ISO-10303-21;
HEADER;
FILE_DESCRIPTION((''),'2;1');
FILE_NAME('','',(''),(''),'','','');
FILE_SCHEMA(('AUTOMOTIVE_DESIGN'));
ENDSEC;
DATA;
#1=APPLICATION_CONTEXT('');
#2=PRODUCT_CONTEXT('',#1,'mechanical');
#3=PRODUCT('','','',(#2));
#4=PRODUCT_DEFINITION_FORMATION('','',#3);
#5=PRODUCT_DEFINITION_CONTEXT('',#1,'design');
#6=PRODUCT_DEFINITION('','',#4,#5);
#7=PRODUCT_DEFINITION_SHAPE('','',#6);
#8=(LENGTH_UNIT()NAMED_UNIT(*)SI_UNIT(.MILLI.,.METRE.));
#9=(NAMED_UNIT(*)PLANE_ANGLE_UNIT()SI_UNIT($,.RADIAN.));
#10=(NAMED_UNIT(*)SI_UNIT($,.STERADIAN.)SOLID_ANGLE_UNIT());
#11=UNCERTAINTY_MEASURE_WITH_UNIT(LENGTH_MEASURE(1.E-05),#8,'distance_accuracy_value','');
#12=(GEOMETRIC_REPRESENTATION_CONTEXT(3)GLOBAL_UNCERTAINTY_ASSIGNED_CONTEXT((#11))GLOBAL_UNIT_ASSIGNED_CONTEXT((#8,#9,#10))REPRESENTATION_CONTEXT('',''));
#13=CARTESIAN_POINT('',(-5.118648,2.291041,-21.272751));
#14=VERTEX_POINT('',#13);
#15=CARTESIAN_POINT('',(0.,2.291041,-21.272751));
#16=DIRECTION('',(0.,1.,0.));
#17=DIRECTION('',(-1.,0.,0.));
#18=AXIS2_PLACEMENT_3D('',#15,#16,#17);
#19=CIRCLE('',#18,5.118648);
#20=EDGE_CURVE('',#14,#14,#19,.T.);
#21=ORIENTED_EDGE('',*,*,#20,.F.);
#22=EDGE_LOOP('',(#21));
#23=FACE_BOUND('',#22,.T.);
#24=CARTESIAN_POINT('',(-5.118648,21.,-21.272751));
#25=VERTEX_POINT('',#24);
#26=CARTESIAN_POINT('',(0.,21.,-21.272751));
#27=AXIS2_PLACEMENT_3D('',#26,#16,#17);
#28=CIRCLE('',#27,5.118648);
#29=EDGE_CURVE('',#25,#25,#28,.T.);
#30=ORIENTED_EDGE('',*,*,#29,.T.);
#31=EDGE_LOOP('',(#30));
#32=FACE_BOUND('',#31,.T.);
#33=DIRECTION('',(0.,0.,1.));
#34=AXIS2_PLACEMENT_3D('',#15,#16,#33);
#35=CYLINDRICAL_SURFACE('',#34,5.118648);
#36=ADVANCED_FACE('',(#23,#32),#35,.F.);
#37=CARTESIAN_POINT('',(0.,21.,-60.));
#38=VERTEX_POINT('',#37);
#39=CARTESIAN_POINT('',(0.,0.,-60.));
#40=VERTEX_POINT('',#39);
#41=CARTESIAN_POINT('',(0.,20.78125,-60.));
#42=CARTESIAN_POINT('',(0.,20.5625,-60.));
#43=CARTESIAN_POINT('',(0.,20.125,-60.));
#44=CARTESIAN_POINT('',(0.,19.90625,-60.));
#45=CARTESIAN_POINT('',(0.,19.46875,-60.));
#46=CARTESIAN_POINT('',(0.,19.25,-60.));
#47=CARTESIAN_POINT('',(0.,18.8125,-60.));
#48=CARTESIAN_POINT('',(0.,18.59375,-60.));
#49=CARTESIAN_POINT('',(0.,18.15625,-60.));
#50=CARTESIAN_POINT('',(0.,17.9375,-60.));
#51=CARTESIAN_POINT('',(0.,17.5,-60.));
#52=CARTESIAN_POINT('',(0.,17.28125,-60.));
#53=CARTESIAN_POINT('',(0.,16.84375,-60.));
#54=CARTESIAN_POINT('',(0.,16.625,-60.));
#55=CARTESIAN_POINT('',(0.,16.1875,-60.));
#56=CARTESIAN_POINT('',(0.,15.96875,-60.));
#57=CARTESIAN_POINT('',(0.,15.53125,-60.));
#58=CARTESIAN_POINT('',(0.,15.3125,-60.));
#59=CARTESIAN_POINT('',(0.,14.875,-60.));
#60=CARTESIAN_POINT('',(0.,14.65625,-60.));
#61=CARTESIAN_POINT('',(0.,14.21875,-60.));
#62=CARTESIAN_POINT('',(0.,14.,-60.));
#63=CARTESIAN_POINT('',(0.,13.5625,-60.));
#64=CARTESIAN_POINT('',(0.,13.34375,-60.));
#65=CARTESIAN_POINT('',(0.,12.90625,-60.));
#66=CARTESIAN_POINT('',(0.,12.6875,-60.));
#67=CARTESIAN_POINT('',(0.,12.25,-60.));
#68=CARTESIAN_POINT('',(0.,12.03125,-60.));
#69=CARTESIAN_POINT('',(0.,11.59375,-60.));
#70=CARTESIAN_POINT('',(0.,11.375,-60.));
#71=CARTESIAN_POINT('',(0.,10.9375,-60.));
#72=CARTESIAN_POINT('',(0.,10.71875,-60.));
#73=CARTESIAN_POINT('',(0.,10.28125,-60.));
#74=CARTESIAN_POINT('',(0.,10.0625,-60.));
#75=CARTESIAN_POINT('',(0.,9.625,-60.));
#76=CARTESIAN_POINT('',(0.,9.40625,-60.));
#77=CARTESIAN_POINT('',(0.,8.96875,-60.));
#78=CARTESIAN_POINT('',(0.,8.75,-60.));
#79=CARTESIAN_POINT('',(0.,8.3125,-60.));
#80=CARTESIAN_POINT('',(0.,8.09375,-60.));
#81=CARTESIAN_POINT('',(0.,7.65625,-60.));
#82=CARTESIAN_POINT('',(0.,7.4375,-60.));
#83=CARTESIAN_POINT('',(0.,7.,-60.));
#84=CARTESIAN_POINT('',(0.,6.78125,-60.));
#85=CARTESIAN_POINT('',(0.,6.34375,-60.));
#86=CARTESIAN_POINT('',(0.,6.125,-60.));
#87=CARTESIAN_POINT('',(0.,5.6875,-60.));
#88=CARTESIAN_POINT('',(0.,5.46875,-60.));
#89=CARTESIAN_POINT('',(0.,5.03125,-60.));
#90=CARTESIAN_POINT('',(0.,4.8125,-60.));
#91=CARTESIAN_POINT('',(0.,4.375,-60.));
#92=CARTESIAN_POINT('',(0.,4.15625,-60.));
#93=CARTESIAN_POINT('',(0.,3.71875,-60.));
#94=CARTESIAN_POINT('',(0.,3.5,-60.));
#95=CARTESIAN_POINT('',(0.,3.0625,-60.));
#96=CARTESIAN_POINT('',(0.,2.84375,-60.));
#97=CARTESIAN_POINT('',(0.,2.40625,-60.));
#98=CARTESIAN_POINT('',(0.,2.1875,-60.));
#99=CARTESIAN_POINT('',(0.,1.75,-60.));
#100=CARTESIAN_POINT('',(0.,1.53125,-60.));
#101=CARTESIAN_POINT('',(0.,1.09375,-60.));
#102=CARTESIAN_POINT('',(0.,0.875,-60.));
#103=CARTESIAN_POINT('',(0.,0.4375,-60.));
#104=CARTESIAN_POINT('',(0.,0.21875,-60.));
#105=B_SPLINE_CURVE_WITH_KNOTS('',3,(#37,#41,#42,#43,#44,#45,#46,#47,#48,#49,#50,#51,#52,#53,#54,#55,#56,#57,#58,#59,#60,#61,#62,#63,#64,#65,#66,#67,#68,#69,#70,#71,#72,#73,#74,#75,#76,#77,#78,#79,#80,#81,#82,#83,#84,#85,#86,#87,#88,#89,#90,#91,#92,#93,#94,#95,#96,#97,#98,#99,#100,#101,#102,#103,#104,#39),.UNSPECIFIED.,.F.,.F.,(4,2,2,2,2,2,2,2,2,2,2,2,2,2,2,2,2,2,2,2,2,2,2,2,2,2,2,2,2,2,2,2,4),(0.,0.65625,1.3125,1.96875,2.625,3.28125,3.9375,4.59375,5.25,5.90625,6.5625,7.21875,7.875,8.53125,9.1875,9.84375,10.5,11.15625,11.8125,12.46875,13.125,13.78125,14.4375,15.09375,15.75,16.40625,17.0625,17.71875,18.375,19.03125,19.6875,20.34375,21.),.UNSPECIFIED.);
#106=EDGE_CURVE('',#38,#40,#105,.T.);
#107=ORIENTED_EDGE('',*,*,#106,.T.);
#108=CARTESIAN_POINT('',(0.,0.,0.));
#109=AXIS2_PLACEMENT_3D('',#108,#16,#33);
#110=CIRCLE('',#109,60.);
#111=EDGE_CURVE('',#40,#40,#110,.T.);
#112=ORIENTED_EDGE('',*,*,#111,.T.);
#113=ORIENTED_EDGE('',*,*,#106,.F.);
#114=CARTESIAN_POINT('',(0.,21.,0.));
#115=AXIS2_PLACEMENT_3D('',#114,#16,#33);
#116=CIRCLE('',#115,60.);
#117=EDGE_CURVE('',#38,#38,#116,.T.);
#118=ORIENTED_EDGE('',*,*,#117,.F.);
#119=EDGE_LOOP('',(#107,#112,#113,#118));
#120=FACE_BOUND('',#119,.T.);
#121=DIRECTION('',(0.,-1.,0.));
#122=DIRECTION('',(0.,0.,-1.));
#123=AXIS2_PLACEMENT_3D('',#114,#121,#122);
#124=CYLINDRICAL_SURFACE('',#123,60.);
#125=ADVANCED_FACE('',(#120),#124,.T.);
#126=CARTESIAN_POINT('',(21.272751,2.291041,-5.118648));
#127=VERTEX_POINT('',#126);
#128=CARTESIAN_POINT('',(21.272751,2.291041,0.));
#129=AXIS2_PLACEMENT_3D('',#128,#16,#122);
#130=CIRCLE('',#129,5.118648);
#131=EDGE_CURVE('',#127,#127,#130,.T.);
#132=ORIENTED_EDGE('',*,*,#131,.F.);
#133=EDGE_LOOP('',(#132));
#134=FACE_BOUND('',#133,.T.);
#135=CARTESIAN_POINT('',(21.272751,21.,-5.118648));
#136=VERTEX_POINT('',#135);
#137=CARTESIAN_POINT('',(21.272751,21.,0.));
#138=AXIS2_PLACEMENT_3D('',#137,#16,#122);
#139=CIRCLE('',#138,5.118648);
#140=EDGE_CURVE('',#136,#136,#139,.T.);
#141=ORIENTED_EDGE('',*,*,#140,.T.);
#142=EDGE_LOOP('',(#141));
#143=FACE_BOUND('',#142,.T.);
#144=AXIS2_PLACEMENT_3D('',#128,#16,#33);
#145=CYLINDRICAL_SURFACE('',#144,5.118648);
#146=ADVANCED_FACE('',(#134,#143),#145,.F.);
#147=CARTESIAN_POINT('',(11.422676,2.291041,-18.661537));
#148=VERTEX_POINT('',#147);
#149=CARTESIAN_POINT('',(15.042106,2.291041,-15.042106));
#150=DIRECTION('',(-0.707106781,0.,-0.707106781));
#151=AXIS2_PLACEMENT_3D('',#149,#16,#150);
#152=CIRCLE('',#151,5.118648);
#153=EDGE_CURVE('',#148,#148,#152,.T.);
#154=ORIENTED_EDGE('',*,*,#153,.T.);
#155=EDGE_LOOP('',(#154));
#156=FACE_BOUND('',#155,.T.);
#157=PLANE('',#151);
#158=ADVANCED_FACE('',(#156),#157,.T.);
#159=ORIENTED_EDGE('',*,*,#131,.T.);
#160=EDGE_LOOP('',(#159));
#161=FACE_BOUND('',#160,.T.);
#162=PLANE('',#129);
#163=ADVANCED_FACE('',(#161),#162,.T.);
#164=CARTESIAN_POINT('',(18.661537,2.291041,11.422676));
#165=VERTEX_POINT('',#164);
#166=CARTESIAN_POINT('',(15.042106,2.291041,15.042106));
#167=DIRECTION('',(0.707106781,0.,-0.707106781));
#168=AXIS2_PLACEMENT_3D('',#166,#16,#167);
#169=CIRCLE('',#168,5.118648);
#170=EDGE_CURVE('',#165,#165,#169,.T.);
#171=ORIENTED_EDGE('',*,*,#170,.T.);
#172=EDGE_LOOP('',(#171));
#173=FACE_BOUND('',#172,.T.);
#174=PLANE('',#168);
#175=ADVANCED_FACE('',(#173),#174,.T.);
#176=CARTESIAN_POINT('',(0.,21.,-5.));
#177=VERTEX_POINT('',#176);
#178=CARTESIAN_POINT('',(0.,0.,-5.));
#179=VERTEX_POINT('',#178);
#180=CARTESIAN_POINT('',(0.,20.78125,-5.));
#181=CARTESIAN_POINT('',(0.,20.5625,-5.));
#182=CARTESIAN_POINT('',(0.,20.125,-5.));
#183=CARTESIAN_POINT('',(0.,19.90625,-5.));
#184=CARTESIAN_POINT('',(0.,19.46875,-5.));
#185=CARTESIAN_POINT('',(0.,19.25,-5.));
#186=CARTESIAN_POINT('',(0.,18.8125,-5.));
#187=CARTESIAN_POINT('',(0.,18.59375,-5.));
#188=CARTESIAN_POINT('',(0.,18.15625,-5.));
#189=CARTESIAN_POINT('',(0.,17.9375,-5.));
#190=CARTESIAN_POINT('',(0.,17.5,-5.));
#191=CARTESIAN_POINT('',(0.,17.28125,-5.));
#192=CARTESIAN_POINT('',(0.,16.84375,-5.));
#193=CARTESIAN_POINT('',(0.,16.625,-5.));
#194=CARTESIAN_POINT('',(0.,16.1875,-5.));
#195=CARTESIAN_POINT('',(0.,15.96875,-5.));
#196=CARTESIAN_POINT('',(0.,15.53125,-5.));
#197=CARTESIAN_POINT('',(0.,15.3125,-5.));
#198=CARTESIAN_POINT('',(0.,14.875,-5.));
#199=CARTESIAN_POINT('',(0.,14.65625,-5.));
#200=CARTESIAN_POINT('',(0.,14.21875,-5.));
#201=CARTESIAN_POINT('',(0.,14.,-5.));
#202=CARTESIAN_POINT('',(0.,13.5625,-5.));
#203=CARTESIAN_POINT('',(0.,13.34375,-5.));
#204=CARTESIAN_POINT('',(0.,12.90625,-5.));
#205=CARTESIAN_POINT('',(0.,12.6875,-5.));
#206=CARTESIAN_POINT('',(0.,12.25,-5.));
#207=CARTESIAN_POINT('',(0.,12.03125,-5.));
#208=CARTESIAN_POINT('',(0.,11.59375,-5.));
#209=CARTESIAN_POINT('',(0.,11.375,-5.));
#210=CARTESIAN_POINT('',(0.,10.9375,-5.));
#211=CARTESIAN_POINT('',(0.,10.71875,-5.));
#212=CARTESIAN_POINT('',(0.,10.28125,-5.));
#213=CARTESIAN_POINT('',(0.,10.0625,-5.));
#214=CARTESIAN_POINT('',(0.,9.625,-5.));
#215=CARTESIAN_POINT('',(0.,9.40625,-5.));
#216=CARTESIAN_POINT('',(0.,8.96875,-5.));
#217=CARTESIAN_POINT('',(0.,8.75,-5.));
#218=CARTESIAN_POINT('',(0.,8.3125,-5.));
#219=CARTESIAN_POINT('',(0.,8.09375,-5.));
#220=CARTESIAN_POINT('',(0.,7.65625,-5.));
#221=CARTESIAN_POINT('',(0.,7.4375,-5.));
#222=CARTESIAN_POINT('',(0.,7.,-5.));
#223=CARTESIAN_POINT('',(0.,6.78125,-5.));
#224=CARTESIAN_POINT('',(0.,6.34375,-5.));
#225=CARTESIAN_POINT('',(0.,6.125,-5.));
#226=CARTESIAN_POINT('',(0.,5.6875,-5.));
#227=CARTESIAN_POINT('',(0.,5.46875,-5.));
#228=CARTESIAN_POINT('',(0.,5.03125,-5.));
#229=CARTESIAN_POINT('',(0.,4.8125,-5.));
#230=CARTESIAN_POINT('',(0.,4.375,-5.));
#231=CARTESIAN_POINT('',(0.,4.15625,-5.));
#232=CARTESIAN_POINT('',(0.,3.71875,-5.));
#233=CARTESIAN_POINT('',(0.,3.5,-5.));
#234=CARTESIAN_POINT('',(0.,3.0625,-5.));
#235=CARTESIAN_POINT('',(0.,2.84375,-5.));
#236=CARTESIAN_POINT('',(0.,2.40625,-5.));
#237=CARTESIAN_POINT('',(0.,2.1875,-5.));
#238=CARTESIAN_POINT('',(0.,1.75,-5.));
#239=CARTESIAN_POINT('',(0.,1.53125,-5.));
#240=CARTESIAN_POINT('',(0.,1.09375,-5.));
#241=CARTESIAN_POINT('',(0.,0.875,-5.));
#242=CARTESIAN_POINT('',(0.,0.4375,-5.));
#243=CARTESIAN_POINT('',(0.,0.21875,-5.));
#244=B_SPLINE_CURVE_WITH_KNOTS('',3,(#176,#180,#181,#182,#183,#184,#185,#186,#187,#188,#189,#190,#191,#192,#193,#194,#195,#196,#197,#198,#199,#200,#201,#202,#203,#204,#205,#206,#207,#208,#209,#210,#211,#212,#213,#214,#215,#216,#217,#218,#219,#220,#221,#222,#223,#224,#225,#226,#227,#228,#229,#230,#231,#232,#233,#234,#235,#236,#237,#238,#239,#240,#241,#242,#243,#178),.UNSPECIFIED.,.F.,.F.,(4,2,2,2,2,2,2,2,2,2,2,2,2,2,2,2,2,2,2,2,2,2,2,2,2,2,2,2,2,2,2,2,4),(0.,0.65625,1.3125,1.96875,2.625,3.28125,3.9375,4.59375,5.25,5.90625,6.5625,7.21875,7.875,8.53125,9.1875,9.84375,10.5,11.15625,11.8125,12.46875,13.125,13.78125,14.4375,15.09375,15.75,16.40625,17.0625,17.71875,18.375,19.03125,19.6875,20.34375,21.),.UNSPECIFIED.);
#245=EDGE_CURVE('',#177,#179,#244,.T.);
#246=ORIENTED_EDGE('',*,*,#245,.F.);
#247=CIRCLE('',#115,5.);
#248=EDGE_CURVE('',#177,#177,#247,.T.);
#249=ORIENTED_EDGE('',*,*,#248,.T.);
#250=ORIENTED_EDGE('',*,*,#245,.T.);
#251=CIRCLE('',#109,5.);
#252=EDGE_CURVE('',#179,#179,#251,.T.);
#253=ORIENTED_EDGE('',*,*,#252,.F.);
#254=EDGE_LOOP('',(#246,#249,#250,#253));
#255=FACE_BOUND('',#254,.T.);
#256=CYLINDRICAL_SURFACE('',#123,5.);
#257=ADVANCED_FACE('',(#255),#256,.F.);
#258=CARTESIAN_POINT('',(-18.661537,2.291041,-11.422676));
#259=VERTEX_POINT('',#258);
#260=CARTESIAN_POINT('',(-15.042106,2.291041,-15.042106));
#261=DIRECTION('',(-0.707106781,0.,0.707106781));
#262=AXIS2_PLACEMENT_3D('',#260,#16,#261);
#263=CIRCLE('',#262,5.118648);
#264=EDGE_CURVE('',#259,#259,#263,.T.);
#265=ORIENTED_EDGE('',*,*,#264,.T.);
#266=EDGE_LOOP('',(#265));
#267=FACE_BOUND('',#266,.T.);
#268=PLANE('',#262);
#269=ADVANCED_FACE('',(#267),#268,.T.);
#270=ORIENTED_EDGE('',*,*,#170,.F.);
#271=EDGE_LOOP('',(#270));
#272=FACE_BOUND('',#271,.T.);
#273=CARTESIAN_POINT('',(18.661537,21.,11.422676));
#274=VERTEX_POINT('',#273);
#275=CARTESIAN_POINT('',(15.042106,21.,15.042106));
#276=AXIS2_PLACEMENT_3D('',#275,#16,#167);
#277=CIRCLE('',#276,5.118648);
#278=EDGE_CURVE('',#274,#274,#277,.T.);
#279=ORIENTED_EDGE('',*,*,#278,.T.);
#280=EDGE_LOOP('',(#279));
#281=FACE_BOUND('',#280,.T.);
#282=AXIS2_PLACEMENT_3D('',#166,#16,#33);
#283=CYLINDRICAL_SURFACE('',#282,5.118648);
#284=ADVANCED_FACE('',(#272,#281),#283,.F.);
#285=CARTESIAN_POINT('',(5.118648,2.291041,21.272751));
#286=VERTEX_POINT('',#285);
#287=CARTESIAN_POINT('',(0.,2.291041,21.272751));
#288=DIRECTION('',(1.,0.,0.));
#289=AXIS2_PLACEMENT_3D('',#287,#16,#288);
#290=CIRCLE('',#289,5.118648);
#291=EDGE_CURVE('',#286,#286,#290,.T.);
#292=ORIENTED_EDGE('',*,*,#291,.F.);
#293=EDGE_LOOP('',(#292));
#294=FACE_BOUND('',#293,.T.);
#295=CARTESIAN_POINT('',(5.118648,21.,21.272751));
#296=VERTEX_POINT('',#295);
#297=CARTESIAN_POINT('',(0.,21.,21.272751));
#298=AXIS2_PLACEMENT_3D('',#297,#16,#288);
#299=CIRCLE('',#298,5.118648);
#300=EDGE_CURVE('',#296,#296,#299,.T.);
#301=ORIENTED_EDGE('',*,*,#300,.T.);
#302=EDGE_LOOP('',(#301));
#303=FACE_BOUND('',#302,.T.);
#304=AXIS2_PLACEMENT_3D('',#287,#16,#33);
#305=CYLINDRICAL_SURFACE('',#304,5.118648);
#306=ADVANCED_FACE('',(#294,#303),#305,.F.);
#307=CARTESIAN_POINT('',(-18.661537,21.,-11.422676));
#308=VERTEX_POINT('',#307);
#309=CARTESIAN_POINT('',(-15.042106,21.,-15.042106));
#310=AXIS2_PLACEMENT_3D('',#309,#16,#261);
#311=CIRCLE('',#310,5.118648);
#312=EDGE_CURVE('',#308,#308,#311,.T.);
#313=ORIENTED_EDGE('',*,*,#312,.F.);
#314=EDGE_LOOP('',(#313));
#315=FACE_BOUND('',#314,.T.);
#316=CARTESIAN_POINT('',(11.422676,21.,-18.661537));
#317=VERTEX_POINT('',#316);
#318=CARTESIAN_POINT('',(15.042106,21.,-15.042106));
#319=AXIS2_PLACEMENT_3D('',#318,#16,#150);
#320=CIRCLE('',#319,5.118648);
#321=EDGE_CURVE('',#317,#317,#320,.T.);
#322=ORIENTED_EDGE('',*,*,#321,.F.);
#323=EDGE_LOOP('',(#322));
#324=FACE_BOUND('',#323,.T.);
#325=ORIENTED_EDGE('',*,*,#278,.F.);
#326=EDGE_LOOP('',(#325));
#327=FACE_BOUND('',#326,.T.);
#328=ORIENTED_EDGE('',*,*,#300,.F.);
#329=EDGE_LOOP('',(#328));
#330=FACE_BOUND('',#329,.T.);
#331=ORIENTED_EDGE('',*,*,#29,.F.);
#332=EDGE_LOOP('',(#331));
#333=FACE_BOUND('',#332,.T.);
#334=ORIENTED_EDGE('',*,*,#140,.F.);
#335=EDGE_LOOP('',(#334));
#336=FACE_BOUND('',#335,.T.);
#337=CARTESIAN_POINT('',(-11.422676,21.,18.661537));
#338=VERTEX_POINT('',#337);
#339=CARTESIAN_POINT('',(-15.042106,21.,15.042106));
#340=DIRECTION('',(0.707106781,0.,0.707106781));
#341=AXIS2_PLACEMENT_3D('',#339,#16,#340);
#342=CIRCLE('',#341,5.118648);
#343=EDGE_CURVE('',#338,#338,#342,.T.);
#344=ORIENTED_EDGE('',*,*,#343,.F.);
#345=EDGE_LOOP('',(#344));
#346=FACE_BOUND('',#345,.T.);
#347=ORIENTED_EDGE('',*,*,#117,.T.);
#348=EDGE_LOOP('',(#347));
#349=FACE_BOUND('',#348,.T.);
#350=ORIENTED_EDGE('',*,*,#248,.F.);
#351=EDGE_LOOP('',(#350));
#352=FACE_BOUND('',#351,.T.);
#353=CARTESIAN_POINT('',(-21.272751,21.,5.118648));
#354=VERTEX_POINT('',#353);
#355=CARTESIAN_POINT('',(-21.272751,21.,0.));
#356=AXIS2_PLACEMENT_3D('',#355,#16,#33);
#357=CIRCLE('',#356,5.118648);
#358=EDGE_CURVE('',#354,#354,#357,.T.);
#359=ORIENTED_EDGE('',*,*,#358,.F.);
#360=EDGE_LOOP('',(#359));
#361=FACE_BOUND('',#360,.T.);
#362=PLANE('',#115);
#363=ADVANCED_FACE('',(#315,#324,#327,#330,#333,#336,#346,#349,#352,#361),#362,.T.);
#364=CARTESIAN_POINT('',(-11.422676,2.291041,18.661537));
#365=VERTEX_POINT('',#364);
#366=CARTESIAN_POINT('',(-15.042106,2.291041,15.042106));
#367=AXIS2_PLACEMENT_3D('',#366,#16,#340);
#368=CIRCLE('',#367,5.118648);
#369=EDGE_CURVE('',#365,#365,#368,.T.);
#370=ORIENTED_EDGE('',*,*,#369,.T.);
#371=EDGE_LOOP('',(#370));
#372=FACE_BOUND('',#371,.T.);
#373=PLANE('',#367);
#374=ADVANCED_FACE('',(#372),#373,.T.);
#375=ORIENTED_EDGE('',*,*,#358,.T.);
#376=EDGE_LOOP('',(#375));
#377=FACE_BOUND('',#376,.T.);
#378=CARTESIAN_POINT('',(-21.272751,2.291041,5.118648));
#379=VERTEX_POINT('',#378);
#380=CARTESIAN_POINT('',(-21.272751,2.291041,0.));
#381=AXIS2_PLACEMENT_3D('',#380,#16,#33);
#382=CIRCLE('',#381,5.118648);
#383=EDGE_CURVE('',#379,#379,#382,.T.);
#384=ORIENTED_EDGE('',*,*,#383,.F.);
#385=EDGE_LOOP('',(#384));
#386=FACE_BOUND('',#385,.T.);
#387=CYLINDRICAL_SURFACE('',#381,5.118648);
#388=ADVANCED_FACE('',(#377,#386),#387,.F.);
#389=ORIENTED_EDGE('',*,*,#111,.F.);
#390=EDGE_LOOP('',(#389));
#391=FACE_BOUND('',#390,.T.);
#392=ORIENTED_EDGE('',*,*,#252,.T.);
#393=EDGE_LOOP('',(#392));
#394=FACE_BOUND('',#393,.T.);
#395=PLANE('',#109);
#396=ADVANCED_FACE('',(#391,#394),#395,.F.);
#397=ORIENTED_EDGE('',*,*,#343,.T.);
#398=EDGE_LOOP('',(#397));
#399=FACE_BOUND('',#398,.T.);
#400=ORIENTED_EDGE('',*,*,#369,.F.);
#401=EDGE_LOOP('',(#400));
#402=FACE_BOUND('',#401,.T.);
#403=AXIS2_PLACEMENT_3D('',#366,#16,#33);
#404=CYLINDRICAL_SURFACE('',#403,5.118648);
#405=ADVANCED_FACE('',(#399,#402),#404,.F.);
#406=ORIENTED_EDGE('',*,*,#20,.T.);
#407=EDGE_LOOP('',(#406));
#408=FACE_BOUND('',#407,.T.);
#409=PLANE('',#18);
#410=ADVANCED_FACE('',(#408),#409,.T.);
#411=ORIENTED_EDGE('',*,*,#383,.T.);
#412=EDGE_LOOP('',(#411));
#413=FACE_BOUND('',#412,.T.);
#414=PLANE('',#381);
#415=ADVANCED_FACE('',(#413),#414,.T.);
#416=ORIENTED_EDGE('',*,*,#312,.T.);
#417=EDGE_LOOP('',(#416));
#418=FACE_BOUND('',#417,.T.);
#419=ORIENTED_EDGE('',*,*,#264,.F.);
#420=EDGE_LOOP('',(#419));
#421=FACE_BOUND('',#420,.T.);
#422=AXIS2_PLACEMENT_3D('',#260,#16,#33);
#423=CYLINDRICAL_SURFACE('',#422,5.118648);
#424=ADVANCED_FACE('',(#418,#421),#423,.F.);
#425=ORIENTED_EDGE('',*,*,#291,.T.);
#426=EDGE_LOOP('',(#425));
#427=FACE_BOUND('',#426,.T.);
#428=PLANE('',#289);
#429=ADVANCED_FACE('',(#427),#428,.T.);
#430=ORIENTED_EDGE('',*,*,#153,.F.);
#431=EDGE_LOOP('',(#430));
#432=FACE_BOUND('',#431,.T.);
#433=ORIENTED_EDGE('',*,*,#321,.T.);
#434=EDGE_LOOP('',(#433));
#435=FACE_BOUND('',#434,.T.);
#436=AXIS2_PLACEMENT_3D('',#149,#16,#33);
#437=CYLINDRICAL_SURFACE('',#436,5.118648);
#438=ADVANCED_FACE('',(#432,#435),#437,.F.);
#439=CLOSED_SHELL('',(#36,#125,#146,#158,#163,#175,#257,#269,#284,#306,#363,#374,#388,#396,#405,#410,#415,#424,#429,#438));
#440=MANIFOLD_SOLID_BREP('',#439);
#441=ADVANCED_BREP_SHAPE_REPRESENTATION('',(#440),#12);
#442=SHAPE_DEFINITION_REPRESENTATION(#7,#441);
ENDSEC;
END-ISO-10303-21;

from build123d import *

# Parameters (mm, degrees)
SKETCH1_R           = 60
BOSS_EXTRUDE1_DEPTH = 21
SKETCH2_R           = 5
CUT_EXTRUDE1_DEPTH  = 88.412813706
SKETCH3_R           = 5.118647663
CUT_EXTRUDE2_DEPTH  = 18.708958538
CIRPATTERN1_COUNT   = 8


with BuildPart() as part:
    # Sketch1 → Boss-Extrude1 (new body)
    with BuildSketch(Plane(origin=(0, 0, 0), x_dir=(1, 0, 0), z_dir=(0, 1, 0))):
        Circle(SKETCH1_R)
    extrude(amount=BOSS_EXTRUDE1_DEPTH)

    # Sketch2 → Cut-Extrude1 (cut, through all)
    with BuildSketch(Plane(origin=(0, 0, 0), x_dir=(1, 0, 0), z_dir=(0, 1, 0))):
        Circle(SKETCH2_R)
    extrude(amount=CUT_EXTRUDE1_DEPTH, mode=Mode.SUBTRACT)

    # Sketch3 → Cut-Extrude2 (cut)
    with BuildSketch(Plane(origin=(0, 21, 0), x_dir=(1, 0, 0), z_dir=(0, 1, 0))):
        with Locations((-21.272750688, 0)):
            Circle(SKETCH3_R)
    cut_extrude2 = extrude(amount=-CUT_EXTRUDE2_DEPTH, mode=Mode.SUBTRACT)

    # CirPattern1: Cut-Extrude2 ×8 about axis
    cirpattern1_axis = Axis((0, 0, 0), (0, 1, 0))
    for i in range(1, CIRPATTERN1_COUNT):
        add(cut_extrude2.rotate(cirpattern1_axis, i * 360 / CIRPATTERN1_COUNT), mode=Mode.SUBTRACT)


solid = part.part
